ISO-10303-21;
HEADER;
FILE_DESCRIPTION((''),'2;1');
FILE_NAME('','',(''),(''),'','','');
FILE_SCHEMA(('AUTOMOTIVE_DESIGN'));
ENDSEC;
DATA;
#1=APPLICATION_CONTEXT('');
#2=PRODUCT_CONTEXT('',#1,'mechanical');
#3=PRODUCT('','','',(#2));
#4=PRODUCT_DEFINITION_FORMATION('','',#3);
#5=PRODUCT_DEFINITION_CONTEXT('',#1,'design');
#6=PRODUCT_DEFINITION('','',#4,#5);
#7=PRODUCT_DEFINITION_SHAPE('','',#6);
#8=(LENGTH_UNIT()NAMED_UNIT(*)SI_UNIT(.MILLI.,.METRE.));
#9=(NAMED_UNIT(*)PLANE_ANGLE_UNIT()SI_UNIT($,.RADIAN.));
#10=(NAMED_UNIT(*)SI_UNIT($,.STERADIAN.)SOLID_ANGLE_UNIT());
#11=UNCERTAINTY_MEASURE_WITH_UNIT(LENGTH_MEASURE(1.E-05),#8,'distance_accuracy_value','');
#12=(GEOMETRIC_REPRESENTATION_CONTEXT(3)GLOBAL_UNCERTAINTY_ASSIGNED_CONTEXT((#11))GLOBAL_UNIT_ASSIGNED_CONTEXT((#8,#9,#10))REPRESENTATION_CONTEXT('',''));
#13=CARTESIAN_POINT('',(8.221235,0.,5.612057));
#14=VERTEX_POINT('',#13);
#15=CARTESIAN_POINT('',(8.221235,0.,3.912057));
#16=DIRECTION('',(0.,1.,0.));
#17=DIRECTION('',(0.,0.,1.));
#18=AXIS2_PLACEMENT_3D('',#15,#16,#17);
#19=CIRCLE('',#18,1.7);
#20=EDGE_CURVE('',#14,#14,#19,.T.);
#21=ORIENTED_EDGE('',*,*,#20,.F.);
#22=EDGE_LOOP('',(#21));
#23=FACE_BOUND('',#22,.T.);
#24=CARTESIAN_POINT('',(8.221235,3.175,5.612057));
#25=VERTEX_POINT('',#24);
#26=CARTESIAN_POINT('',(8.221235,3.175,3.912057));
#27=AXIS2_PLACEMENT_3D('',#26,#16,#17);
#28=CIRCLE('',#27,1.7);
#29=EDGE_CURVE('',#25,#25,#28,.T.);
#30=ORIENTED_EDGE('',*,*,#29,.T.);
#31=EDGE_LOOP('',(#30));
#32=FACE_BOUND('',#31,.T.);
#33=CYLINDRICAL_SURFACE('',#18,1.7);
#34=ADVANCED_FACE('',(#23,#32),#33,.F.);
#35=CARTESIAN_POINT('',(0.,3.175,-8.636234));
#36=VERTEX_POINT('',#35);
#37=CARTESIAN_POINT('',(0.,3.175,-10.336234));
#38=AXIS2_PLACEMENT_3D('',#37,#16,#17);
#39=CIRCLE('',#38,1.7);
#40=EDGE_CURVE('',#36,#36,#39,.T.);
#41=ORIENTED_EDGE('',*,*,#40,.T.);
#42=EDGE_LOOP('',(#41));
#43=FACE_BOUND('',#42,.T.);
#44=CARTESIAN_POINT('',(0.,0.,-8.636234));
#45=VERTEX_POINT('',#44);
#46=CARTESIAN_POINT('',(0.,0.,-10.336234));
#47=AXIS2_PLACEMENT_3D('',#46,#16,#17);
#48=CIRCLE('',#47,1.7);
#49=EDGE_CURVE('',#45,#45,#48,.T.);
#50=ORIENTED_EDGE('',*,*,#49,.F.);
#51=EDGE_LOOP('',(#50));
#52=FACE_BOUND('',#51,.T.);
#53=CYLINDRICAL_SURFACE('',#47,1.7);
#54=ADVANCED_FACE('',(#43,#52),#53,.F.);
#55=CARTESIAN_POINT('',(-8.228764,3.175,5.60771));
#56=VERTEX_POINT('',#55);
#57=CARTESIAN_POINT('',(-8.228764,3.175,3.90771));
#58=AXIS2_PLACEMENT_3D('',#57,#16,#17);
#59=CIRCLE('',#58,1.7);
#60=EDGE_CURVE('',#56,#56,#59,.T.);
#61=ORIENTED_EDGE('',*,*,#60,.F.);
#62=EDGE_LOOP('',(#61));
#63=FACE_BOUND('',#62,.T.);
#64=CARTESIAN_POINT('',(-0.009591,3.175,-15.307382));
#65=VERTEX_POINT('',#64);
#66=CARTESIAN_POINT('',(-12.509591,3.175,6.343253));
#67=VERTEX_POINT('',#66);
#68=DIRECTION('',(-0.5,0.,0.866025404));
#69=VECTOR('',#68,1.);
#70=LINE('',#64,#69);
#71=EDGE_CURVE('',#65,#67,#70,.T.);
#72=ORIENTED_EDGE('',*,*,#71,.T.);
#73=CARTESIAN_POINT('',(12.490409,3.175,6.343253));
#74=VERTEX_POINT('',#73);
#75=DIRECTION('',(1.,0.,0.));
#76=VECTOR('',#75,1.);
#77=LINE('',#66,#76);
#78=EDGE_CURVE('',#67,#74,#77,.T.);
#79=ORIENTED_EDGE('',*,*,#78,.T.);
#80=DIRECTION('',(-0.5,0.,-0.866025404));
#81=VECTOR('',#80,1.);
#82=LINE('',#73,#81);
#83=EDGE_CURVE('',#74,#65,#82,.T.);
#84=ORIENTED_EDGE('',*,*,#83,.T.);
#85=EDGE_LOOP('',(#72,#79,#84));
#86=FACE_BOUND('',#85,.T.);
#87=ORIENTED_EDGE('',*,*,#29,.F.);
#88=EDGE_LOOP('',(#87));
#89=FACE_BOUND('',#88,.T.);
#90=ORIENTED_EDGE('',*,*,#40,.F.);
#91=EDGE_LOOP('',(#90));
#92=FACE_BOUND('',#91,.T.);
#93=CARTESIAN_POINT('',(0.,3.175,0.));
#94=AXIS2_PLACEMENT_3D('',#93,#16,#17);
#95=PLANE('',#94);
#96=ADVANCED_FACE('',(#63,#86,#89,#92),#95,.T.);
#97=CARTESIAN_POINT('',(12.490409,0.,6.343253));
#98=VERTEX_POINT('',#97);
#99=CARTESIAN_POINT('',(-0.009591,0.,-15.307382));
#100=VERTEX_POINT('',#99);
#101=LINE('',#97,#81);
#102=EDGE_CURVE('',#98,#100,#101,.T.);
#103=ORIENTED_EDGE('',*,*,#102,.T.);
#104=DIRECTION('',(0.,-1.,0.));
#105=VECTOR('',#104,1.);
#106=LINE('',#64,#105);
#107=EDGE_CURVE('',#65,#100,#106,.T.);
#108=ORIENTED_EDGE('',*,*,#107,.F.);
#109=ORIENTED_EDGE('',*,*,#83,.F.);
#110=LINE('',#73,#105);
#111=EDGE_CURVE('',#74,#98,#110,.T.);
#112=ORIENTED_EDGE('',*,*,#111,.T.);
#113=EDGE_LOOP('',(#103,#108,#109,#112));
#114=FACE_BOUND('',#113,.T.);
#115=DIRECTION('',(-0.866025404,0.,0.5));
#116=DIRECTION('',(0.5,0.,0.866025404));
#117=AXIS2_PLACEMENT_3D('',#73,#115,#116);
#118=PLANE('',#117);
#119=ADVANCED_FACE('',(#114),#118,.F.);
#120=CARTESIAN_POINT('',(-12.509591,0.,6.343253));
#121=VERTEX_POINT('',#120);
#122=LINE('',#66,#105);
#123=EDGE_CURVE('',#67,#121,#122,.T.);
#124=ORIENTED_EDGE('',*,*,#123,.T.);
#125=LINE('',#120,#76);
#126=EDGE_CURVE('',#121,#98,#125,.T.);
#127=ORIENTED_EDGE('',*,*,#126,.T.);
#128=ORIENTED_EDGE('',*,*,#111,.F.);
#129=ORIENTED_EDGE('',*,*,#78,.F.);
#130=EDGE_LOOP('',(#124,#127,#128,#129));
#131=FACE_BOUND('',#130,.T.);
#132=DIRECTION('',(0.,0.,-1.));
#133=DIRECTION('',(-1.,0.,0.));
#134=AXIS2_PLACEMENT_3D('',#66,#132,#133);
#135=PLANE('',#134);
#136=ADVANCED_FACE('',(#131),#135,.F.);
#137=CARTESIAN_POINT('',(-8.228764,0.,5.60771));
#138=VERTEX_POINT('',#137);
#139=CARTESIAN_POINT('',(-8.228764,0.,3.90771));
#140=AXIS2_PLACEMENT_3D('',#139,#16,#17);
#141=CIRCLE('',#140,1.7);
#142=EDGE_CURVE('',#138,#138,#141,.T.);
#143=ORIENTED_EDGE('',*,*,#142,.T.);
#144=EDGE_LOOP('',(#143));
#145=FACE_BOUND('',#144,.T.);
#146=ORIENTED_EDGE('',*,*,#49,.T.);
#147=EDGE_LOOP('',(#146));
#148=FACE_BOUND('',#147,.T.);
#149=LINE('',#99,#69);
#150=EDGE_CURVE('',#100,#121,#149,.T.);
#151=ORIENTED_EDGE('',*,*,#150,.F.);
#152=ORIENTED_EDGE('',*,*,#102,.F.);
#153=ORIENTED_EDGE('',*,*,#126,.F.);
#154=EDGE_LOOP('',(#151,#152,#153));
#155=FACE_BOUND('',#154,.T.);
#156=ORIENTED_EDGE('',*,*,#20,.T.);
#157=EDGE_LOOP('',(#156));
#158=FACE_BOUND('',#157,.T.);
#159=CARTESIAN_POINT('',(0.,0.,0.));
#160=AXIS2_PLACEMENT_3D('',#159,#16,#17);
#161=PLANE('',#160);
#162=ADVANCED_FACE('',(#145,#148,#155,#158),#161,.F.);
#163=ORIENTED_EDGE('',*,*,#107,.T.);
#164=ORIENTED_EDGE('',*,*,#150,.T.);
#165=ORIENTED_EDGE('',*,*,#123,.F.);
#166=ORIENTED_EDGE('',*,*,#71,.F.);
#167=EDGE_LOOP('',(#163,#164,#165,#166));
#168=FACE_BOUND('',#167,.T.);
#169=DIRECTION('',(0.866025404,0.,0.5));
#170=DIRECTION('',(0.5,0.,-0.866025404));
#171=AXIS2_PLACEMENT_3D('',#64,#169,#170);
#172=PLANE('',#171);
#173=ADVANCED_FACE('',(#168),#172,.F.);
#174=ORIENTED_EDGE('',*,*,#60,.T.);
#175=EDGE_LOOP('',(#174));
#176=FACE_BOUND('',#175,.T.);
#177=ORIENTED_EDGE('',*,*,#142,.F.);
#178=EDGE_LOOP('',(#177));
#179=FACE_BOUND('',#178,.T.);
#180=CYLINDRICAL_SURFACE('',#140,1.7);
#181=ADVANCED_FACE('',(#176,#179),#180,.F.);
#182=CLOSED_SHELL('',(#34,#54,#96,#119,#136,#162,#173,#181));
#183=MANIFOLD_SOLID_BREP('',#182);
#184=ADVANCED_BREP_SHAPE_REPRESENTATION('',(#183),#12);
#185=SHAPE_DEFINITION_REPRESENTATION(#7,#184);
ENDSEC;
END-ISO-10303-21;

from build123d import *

# Parameters (mm, degrees)
BOSS_EXTRUDE1_DEPTH = 3.175
HOLE1_OUTLINE_R     = 1.7
HOLE1_DEPTH         = 3.175


# Read off the part's stored shape, not the designer's step: Hole1
with BuildPart() as part:
    # Sketch1 → Boss-Extrude1 (new body)
    with BuildSketch(Plane(origin=(0, 0, 0), x_dir=(1, 0, 0), z_dir=(0, 1, 0))):
        Polygon((-0.009590706, 15.307381957), (-12.509590706, -6.343253138), (12.490409294, -6.343253138), align=None)
    extrude(amount=BOSS_EXTRUDE1_DEPTH)

    # Hole1 outline → Hole1 (cut)
    with BuildSketch(Plane(origin=(0, 0, 0), x_dir=(1, 0, 0), z_dir=(0, 1, 0))):
        with Locations((8.221235052, -3.912057057)):
            Circle(HOLE1_OUTLINE_R)
        with Locations((-8.228764373, -3.907710002)):
            Circle(HOLE1_OUTLINE_R)
        with Locations((0, 10.336233865)):
            Circle(HOLE1_OUTLINE_R)
    extrude(amount=HOLE1_DEPTH, mode=Mode.SUBTRACT)


solid = part.part
